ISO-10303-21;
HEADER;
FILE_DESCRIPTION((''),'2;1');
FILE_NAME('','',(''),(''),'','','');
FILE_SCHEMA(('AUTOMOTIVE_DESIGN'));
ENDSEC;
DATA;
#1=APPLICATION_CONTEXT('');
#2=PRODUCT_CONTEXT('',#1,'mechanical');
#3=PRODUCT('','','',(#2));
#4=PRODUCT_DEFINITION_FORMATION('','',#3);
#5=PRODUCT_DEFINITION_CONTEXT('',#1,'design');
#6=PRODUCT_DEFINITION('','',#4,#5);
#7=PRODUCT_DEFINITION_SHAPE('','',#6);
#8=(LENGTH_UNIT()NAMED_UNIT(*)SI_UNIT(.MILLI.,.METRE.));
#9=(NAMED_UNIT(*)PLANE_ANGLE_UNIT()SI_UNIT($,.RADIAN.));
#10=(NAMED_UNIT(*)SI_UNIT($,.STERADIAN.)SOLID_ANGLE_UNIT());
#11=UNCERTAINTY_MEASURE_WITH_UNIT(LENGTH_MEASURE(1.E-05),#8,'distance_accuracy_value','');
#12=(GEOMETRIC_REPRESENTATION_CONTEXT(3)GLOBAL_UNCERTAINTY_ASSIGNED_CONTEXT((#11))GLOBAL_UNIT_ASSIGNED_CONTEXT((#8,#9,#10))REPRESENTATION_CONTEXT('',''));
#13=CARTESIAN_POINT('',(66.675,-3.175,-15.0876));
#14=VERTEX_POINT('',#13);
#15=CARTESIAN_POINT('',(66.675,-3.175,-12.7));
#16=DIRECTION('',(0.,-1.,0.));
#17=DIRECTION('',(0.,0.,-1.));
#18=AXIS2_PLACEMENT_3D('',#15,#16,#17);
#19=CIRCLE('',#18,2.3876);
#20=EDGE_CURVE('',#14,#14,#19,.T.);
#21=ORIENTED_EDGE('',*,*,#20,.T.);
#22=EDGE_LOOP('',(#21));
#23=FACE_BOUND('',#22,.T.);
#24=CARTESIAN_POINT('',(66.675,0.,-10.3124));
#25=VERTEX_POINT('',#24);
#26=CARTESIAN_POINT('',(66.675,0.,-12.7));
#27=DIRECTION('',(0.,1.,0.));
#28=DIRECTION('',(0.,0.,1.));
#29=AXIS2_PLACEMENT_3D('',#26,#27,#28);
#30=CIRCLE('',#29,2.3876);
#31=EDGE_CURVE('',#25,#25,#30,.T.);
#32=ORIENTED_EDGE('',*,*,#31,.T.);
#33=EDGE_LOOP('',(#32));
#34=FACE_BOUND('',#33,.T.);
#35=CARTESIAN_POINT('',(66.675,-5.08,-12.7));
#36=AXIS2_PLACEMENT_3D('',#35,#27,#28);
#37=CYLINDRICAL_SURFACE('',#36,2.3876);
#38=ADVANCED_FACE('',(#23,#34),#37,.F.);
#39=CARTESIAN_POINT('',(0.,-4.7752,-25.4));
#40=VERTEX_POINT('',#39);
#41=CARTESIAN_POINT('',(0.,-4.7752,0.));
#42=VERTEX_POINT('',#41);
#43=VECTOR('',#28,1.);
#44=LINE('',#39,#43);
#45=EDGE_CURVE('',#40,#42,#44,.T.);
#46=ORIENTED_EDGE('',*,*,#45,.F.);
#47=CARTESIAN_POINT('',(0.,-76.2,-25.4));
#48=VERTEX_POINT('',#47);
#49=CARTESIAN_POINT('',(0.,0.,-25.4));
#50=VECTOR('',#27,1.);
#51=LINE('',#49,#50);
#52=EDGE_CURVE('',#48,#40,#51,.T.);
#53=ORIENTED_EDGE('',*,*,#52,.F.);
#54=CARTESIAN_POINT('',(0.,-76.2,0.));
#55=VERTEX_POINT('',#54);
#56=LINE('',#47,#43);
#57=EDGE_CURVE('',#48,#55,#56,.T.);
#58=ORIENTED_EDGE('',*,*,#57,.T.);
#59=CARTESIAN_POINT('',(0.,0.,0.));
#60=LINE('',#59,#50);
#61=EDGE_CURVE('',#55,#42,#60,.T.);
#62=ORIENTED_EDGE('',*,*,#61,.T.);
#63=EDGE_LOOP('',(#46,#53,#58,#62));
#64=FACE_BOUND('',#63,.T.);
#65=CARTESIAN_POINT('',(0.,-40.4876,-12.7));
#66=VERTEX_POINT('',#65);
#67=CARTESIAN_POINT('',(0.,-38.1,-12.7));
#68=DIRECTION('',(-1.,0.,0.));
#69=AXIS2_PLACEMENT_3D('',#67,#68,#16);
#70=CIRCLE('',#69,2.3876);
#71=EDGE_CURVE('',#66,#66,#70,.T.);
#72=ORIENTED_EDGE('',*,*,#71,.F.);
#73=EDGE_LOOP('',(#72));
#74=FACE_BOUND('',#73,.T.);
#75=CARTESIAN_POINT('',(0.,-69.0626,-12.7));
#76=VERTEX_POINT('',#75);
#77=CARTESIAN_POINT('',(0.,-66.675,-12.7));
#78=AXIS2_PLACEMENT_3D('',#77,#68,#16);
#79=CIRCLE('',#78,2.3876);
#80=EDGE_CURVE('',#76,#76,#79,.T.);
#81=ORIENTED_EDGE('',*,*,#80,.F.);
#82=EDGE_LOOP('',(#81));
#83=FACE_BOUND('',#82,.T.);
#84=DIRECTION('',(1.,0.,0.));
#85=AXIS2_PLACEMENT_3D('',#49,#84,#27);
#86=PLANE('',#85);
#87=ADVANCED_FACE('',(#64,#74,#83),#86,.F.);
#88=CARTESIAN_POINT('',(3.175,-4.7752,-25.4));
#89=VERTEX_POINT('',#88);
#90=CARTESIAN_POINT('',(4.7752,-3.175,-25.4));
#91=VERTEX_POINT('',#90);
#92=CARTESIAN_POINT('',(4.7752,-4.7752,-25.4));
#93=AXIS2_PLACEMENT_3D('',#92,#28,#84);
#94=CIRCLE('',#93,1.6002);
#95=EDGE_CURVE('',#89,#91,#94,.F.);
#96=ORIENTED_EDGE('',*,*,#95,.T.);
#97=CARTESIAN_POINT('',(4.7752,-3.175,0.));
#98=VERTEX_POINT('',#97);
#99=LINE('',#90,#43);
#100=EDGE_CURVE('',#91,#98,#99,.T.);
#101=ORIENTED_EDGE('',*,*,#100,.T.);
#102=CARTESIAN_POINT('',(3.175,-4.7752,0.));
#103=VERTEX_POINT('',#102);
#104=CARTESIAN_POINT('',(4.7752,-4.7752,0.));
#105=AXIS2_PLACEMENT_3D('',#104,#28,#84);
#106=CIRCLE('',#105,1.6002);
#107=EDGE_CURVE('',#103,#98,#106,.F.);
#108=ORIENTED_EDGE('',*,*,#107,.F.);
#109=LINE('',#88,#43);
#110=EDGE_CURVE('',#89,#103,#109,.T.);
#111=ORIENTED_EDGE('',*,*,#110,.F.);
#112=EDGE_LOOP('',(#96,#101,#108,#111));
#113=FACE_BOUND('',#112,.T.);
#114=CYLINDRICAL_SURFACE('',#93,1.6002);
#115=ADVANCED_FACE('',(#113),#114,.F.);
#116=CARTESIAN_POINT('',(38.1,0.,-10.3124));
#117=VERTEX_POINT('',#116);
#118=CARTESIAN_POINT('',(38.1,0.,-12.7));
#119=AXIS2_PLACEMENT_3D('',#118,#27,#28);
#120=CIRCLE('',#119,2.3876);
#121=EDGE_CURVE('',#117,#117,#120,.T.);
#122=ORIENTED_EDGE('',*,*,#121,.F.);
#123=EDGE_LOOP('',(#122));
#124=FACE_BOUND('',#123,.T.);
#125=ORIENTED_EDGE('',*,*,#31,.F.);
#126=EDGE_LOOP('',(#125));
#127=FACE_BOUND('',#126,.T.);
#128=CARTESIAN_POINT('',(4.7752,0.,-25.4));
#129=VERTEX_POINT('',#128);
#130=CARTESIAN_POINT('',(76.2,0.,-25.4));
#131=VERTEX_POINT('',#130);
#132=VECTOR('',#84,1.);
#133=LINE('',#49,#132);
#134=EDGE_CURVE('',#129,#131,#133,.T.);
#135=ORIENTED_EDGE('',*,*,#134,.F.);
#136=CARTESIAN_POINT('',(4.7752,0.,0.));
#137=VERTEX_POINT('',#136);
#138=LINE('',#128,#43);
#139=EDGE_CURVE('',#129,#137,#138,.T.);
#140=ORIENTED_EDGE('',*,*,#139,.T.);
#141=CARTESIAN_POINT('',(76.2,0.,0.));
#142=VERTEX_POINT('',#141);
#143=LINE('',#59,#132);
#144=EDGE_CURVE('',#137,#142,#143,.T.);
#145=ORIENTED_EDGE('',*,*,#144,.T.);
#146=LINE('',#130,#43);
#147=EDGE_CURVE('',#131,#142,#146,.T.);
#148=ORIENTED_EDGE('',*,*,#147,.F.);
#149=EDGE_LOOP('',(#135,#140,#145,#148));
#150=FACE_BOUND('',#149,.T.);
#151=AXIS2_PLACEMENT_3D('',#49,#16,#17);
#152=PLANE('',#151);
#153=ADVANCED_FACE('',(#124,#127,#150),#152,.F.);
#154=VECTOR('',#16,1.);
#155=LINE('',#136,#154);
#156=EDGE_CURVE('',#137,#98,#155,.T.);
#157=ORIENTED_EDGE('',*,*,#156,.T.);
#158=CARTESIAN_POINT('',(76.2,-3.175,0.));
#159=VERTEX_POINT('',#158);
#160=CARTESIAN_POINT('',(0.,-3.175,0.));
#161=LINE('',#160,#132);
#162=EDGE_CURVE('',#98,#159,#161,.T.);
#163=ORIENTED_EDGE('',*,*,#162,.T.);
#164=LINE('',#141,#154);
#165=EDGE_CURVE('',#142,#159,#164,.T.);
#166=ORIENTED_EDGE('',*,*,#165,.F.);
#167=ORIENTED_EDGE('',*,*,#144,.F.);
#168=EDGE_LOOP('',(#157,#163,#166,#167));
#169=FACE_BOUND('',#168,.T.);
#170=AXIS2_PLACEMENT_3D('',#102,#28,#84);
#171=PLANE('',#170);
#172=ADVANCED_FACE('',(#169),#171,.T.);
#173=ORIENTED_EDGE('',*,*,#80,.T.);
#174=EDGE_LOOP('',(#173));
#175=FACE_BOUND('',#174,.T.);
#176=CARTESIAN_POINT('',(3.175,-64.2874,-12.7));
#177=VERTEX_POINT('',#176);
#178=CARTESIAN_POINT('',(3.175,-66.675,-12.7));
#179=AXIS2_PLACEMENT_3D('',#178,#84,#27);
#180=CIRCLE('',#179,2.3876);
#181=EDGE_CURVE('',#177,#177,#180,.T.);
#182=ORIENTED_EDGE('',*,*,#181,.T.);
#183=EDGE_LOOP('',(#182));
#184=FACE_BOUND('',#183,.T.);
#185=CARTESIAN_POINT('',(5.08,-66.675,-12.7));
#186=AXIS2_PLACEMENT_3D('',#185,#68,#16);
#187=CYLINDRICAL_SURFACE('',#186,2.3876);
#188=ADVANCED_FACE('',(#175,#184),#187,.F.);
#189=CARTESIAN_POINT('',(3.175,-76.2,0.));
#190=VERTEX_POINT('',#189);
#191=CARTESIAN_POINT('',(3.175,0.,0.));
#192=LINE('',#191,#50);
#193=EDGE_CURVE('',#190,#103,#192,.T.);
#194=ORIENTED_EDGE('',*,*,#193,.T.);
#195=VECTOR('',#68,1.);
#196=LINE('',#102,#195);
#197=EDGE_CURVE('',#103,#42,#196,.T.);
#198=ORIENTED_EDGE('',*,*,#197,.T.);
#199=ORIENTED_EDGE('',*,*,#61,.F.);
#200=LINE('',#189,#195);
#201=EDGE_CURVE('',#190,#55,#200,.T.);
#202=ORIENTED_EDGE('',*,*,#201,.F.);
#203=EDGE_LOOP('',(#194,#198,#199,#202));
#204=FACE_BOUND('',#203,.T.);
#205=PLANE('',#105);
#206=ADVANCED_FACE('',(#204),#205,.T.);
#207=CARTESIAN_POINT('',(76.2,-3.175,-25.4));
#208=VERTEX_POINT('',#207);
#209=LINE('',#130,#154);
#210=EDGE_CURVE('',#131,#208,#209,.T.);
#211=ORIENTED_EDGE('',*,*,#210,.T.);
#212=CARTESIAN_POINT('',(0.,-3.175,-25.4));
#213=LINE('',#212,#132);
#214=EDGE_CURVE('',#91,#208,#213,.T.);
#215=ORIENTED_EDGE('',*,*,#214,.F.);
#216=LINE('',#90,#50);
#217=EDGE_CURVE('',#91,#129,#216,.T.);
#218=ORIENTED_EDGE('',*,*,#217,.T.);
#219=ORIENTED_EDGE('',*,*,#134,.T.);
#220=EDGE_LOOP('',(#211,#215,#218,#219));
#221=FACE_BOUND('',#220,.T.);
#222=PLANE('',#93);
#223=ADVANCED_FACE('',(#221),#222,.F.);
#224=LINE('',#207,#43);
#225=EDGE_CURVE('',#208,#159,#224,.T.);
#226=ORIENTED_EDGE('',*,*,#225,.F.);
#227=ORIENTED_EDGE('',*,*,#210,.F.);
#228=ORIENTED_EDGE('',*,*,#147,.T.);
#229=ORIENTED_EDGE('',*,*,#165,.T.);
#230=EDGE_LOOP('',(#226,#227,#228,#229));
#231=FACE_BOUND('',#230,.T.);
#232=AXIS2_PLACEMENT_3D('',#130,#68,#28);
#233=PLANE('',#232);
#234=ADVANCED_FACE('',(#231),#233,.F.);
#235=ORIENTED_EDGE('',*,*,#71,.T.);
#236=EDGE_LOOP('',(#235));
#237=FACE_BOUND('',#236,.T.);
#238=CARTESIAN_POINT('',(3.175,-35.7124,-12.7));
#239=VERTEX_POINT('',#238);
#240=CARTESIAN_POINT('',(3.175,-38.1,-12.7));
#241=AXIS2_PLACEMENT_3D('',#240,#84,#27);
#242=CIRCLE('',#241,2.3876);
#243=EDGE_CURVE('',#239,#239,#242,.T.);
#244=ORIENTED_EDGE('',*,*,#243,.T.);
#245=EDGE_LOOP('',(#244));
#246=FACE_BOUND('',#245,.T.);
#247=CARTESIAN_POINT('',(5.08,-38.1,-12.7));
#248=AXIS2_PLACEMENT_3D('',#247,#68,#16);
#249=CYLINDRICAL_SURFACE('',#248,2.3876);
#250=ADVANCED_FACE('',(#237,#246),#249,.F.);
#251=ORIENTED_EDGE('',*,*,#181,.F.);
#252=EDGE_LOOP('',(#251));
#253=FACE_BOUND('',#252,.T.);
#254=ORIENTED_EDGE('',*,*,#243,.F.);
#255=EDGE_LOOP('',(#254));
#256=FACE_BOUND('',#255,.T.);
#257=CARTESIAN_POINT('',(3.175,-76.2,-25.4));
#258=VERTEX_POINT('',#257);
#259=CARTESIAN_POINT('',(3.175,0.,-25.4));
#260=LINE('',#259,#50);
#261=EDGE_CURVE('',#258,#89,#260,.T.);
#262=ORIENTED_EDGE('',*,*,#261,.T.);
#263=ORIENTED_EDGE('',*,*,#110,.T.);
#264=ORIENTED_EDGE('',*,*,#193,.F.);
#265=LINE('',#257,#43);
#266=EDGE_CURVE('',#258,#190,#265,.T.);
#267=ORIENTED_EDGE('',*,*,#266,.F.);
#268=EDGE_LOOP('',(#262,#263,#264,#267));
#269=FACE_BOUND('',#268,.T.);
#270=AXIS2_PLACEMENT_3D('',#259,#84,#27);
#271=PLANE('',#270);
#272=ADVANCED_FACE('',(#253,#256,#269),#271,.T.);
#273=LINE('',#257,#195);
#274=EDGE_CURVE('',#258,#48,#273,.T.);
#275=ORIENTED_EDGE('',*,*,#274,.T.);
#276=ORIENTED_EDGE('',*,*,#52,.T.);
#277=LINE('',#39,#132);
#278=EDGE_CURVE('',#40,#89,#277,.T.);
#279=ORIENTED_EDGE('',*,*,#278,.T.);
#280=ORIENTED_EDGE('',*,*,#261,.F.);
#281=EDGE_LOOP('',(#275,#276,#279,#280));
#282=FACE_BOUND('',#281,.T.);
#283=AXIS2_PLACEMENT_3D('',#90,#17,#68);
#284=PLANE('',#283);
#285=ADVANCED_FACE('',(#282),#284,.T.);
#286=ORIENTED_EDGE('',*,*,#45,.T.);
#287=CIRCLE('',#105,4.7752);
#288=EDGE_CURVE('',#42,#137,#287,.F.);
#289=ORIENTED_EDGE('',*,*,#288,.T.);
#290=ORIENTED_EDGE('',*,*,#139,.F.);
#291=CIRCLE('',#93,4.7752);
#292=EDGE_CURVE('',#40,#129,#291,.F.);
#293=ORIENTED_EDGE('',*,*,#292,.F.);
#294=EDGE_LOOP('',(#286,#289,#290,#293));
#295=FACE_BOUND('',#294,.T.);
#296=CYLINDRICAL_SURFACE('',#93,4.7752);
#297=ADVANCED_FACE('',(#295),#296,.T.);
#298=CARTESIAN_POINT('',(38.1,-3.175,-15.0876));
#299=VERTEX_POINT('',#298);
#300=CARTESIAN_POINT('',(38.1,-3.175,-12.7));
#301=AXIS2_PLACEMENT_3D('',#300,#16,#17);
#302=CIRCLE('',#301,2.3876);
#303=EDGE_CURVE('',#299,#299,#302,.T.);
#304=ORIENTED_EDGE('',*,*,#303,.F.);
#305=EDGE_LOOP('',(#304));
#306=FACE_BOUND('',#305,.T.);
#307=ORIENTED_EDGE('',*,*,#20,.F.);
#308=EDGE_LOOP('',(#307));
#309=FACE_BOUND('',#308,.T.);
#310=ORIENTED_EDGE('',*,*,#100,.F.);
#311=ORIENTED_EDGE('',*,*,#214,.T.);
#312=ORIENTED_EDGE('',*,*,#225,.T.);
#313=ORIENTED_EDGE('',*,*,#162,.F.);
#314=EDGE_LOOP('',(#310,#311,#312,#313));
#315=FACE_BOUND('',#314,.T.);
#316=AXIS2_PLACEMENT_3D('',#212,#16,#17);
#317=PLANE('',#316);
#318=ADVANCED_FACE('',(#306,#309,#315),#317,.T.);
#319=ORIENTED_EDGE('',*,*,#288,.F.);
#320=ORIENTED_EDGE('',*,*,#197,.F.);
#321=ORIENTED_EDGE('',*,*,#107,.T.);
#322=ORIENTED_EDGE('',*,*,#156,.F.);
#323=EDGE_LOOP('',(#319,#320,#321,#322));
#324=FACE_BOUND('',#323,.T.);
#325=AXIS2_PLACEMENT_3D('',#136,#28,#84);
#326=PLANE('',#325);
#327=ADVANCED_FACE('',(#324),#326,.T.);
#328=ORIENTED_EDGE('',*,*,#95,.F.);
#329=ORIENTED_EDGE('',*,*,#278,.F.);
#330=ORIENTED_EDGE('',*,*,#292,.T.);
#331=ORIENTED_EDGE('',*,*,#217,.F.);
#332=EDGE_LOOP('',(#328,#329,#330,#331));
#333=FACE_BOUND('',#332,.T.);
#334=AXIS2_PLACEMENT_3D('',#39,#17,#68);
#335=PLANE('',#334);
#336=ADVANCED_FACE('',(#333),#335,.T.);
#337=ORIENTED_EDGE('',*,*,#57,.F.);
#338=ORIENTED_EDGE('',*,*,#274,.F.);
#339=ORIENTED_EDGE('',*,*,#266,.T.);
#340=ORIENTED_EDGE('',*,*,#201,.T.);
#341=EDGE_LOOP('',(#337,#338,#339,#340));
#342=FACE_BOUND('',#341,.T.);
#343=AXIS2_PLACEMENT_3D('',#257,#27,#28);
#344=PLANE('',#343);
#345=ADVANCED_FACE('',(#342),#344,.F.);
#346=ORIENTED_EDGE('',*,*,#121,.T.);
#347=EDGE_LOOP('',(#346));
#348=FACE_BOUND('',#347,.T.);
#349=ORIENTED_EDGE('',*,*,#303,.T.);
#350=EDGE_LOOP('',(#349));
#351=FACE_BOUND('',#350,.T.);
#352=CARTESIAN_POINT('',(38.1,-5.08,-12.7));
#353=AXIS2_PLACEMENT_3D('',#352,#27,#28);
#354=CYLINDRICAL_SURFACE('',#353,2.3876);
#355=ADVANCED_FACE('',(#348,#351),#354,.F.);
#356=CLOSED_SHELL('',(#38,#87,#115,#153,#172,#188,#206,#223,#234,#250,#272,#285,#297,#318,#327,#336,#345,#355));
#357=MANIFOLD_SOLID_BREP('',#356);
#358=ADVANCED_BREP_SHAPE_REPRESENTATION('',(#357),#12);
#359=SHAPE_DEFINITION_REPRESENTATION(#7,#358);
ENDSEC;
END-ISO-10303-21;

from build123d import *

# Parameters (mm, degrees)
BASE_FLANGE1_DEPTH = 25.4
SKETCH3_R          = 2.3876
CUT_EXTRUDE1_DEPTH = 5.08
SKETCH4_R          = 2.3876
CUT_EXTRUDE2_DEPTH = 5.08


# Sheet-metal steps are written as plain solids
with BuildPart() as part:
    # Sketch1 → Base-Flange1 (new body)
    with BuildSketch(Plane.XY):
        with BuildLine():
            Line((76.2, 0), (4.7752, 0))
            ThreePointArc((4.7752, 0), (1.398623698, -1.398623698), (0, -4.7752))
            Line((0, -4.7752), (0, -76.2))
            Line((0, -76.2), (3.175, -76.2))
            Line((3.175, -76.2), (3.175, -4.7752))
            ThreePointArc((3.175, -4.7752), (3.643687729, -3.643687729), (4.7752, -3.175))
            Line((4.7752, -3.175), (76.2, -3.175))
            Line((76.2, -3.175), (76.2, 0))
        make_face()
    extrude(amount=-BASE_FLANGE1_DEPTH)

    # Sketch3 → Cut-Extrude1 (cut)
    with BuildSketch(Plane(origin=(0, 0, 0), x_dir=(-1, 0, 0), z_dir=(0, 1, 0))):
        with Locations(Location((-66.675, -12.7, 0), (0, 0, 90))):
            Circle(SKETCH3_R)
        with Locations(Location((-38.1, -12.7, 0), (0, 0, 90))):
            Circle(SKETCH3_R)
    extrude(amount=-CUT_EXTRUDE1_DEPTH, mode=Mode.SUBTRACT)

    # Sketch4 → Cut-Extrude2 (cut)
    with BuildSketch(Plane.ZY):
        with Locations(Location((-12.7, -66.675, 0), (0, 0, 270))):
            Circle(SKETCH4_R)
        with Locations(Location((-12.7, -38.1, 0), (0, 0, 270))):
            Circle(SKETCH4_R)
    extrude(amount=-CUT_EXTRUDE2_DEPTH, mode=Mode.SUBTRACT)


solid = part.part
